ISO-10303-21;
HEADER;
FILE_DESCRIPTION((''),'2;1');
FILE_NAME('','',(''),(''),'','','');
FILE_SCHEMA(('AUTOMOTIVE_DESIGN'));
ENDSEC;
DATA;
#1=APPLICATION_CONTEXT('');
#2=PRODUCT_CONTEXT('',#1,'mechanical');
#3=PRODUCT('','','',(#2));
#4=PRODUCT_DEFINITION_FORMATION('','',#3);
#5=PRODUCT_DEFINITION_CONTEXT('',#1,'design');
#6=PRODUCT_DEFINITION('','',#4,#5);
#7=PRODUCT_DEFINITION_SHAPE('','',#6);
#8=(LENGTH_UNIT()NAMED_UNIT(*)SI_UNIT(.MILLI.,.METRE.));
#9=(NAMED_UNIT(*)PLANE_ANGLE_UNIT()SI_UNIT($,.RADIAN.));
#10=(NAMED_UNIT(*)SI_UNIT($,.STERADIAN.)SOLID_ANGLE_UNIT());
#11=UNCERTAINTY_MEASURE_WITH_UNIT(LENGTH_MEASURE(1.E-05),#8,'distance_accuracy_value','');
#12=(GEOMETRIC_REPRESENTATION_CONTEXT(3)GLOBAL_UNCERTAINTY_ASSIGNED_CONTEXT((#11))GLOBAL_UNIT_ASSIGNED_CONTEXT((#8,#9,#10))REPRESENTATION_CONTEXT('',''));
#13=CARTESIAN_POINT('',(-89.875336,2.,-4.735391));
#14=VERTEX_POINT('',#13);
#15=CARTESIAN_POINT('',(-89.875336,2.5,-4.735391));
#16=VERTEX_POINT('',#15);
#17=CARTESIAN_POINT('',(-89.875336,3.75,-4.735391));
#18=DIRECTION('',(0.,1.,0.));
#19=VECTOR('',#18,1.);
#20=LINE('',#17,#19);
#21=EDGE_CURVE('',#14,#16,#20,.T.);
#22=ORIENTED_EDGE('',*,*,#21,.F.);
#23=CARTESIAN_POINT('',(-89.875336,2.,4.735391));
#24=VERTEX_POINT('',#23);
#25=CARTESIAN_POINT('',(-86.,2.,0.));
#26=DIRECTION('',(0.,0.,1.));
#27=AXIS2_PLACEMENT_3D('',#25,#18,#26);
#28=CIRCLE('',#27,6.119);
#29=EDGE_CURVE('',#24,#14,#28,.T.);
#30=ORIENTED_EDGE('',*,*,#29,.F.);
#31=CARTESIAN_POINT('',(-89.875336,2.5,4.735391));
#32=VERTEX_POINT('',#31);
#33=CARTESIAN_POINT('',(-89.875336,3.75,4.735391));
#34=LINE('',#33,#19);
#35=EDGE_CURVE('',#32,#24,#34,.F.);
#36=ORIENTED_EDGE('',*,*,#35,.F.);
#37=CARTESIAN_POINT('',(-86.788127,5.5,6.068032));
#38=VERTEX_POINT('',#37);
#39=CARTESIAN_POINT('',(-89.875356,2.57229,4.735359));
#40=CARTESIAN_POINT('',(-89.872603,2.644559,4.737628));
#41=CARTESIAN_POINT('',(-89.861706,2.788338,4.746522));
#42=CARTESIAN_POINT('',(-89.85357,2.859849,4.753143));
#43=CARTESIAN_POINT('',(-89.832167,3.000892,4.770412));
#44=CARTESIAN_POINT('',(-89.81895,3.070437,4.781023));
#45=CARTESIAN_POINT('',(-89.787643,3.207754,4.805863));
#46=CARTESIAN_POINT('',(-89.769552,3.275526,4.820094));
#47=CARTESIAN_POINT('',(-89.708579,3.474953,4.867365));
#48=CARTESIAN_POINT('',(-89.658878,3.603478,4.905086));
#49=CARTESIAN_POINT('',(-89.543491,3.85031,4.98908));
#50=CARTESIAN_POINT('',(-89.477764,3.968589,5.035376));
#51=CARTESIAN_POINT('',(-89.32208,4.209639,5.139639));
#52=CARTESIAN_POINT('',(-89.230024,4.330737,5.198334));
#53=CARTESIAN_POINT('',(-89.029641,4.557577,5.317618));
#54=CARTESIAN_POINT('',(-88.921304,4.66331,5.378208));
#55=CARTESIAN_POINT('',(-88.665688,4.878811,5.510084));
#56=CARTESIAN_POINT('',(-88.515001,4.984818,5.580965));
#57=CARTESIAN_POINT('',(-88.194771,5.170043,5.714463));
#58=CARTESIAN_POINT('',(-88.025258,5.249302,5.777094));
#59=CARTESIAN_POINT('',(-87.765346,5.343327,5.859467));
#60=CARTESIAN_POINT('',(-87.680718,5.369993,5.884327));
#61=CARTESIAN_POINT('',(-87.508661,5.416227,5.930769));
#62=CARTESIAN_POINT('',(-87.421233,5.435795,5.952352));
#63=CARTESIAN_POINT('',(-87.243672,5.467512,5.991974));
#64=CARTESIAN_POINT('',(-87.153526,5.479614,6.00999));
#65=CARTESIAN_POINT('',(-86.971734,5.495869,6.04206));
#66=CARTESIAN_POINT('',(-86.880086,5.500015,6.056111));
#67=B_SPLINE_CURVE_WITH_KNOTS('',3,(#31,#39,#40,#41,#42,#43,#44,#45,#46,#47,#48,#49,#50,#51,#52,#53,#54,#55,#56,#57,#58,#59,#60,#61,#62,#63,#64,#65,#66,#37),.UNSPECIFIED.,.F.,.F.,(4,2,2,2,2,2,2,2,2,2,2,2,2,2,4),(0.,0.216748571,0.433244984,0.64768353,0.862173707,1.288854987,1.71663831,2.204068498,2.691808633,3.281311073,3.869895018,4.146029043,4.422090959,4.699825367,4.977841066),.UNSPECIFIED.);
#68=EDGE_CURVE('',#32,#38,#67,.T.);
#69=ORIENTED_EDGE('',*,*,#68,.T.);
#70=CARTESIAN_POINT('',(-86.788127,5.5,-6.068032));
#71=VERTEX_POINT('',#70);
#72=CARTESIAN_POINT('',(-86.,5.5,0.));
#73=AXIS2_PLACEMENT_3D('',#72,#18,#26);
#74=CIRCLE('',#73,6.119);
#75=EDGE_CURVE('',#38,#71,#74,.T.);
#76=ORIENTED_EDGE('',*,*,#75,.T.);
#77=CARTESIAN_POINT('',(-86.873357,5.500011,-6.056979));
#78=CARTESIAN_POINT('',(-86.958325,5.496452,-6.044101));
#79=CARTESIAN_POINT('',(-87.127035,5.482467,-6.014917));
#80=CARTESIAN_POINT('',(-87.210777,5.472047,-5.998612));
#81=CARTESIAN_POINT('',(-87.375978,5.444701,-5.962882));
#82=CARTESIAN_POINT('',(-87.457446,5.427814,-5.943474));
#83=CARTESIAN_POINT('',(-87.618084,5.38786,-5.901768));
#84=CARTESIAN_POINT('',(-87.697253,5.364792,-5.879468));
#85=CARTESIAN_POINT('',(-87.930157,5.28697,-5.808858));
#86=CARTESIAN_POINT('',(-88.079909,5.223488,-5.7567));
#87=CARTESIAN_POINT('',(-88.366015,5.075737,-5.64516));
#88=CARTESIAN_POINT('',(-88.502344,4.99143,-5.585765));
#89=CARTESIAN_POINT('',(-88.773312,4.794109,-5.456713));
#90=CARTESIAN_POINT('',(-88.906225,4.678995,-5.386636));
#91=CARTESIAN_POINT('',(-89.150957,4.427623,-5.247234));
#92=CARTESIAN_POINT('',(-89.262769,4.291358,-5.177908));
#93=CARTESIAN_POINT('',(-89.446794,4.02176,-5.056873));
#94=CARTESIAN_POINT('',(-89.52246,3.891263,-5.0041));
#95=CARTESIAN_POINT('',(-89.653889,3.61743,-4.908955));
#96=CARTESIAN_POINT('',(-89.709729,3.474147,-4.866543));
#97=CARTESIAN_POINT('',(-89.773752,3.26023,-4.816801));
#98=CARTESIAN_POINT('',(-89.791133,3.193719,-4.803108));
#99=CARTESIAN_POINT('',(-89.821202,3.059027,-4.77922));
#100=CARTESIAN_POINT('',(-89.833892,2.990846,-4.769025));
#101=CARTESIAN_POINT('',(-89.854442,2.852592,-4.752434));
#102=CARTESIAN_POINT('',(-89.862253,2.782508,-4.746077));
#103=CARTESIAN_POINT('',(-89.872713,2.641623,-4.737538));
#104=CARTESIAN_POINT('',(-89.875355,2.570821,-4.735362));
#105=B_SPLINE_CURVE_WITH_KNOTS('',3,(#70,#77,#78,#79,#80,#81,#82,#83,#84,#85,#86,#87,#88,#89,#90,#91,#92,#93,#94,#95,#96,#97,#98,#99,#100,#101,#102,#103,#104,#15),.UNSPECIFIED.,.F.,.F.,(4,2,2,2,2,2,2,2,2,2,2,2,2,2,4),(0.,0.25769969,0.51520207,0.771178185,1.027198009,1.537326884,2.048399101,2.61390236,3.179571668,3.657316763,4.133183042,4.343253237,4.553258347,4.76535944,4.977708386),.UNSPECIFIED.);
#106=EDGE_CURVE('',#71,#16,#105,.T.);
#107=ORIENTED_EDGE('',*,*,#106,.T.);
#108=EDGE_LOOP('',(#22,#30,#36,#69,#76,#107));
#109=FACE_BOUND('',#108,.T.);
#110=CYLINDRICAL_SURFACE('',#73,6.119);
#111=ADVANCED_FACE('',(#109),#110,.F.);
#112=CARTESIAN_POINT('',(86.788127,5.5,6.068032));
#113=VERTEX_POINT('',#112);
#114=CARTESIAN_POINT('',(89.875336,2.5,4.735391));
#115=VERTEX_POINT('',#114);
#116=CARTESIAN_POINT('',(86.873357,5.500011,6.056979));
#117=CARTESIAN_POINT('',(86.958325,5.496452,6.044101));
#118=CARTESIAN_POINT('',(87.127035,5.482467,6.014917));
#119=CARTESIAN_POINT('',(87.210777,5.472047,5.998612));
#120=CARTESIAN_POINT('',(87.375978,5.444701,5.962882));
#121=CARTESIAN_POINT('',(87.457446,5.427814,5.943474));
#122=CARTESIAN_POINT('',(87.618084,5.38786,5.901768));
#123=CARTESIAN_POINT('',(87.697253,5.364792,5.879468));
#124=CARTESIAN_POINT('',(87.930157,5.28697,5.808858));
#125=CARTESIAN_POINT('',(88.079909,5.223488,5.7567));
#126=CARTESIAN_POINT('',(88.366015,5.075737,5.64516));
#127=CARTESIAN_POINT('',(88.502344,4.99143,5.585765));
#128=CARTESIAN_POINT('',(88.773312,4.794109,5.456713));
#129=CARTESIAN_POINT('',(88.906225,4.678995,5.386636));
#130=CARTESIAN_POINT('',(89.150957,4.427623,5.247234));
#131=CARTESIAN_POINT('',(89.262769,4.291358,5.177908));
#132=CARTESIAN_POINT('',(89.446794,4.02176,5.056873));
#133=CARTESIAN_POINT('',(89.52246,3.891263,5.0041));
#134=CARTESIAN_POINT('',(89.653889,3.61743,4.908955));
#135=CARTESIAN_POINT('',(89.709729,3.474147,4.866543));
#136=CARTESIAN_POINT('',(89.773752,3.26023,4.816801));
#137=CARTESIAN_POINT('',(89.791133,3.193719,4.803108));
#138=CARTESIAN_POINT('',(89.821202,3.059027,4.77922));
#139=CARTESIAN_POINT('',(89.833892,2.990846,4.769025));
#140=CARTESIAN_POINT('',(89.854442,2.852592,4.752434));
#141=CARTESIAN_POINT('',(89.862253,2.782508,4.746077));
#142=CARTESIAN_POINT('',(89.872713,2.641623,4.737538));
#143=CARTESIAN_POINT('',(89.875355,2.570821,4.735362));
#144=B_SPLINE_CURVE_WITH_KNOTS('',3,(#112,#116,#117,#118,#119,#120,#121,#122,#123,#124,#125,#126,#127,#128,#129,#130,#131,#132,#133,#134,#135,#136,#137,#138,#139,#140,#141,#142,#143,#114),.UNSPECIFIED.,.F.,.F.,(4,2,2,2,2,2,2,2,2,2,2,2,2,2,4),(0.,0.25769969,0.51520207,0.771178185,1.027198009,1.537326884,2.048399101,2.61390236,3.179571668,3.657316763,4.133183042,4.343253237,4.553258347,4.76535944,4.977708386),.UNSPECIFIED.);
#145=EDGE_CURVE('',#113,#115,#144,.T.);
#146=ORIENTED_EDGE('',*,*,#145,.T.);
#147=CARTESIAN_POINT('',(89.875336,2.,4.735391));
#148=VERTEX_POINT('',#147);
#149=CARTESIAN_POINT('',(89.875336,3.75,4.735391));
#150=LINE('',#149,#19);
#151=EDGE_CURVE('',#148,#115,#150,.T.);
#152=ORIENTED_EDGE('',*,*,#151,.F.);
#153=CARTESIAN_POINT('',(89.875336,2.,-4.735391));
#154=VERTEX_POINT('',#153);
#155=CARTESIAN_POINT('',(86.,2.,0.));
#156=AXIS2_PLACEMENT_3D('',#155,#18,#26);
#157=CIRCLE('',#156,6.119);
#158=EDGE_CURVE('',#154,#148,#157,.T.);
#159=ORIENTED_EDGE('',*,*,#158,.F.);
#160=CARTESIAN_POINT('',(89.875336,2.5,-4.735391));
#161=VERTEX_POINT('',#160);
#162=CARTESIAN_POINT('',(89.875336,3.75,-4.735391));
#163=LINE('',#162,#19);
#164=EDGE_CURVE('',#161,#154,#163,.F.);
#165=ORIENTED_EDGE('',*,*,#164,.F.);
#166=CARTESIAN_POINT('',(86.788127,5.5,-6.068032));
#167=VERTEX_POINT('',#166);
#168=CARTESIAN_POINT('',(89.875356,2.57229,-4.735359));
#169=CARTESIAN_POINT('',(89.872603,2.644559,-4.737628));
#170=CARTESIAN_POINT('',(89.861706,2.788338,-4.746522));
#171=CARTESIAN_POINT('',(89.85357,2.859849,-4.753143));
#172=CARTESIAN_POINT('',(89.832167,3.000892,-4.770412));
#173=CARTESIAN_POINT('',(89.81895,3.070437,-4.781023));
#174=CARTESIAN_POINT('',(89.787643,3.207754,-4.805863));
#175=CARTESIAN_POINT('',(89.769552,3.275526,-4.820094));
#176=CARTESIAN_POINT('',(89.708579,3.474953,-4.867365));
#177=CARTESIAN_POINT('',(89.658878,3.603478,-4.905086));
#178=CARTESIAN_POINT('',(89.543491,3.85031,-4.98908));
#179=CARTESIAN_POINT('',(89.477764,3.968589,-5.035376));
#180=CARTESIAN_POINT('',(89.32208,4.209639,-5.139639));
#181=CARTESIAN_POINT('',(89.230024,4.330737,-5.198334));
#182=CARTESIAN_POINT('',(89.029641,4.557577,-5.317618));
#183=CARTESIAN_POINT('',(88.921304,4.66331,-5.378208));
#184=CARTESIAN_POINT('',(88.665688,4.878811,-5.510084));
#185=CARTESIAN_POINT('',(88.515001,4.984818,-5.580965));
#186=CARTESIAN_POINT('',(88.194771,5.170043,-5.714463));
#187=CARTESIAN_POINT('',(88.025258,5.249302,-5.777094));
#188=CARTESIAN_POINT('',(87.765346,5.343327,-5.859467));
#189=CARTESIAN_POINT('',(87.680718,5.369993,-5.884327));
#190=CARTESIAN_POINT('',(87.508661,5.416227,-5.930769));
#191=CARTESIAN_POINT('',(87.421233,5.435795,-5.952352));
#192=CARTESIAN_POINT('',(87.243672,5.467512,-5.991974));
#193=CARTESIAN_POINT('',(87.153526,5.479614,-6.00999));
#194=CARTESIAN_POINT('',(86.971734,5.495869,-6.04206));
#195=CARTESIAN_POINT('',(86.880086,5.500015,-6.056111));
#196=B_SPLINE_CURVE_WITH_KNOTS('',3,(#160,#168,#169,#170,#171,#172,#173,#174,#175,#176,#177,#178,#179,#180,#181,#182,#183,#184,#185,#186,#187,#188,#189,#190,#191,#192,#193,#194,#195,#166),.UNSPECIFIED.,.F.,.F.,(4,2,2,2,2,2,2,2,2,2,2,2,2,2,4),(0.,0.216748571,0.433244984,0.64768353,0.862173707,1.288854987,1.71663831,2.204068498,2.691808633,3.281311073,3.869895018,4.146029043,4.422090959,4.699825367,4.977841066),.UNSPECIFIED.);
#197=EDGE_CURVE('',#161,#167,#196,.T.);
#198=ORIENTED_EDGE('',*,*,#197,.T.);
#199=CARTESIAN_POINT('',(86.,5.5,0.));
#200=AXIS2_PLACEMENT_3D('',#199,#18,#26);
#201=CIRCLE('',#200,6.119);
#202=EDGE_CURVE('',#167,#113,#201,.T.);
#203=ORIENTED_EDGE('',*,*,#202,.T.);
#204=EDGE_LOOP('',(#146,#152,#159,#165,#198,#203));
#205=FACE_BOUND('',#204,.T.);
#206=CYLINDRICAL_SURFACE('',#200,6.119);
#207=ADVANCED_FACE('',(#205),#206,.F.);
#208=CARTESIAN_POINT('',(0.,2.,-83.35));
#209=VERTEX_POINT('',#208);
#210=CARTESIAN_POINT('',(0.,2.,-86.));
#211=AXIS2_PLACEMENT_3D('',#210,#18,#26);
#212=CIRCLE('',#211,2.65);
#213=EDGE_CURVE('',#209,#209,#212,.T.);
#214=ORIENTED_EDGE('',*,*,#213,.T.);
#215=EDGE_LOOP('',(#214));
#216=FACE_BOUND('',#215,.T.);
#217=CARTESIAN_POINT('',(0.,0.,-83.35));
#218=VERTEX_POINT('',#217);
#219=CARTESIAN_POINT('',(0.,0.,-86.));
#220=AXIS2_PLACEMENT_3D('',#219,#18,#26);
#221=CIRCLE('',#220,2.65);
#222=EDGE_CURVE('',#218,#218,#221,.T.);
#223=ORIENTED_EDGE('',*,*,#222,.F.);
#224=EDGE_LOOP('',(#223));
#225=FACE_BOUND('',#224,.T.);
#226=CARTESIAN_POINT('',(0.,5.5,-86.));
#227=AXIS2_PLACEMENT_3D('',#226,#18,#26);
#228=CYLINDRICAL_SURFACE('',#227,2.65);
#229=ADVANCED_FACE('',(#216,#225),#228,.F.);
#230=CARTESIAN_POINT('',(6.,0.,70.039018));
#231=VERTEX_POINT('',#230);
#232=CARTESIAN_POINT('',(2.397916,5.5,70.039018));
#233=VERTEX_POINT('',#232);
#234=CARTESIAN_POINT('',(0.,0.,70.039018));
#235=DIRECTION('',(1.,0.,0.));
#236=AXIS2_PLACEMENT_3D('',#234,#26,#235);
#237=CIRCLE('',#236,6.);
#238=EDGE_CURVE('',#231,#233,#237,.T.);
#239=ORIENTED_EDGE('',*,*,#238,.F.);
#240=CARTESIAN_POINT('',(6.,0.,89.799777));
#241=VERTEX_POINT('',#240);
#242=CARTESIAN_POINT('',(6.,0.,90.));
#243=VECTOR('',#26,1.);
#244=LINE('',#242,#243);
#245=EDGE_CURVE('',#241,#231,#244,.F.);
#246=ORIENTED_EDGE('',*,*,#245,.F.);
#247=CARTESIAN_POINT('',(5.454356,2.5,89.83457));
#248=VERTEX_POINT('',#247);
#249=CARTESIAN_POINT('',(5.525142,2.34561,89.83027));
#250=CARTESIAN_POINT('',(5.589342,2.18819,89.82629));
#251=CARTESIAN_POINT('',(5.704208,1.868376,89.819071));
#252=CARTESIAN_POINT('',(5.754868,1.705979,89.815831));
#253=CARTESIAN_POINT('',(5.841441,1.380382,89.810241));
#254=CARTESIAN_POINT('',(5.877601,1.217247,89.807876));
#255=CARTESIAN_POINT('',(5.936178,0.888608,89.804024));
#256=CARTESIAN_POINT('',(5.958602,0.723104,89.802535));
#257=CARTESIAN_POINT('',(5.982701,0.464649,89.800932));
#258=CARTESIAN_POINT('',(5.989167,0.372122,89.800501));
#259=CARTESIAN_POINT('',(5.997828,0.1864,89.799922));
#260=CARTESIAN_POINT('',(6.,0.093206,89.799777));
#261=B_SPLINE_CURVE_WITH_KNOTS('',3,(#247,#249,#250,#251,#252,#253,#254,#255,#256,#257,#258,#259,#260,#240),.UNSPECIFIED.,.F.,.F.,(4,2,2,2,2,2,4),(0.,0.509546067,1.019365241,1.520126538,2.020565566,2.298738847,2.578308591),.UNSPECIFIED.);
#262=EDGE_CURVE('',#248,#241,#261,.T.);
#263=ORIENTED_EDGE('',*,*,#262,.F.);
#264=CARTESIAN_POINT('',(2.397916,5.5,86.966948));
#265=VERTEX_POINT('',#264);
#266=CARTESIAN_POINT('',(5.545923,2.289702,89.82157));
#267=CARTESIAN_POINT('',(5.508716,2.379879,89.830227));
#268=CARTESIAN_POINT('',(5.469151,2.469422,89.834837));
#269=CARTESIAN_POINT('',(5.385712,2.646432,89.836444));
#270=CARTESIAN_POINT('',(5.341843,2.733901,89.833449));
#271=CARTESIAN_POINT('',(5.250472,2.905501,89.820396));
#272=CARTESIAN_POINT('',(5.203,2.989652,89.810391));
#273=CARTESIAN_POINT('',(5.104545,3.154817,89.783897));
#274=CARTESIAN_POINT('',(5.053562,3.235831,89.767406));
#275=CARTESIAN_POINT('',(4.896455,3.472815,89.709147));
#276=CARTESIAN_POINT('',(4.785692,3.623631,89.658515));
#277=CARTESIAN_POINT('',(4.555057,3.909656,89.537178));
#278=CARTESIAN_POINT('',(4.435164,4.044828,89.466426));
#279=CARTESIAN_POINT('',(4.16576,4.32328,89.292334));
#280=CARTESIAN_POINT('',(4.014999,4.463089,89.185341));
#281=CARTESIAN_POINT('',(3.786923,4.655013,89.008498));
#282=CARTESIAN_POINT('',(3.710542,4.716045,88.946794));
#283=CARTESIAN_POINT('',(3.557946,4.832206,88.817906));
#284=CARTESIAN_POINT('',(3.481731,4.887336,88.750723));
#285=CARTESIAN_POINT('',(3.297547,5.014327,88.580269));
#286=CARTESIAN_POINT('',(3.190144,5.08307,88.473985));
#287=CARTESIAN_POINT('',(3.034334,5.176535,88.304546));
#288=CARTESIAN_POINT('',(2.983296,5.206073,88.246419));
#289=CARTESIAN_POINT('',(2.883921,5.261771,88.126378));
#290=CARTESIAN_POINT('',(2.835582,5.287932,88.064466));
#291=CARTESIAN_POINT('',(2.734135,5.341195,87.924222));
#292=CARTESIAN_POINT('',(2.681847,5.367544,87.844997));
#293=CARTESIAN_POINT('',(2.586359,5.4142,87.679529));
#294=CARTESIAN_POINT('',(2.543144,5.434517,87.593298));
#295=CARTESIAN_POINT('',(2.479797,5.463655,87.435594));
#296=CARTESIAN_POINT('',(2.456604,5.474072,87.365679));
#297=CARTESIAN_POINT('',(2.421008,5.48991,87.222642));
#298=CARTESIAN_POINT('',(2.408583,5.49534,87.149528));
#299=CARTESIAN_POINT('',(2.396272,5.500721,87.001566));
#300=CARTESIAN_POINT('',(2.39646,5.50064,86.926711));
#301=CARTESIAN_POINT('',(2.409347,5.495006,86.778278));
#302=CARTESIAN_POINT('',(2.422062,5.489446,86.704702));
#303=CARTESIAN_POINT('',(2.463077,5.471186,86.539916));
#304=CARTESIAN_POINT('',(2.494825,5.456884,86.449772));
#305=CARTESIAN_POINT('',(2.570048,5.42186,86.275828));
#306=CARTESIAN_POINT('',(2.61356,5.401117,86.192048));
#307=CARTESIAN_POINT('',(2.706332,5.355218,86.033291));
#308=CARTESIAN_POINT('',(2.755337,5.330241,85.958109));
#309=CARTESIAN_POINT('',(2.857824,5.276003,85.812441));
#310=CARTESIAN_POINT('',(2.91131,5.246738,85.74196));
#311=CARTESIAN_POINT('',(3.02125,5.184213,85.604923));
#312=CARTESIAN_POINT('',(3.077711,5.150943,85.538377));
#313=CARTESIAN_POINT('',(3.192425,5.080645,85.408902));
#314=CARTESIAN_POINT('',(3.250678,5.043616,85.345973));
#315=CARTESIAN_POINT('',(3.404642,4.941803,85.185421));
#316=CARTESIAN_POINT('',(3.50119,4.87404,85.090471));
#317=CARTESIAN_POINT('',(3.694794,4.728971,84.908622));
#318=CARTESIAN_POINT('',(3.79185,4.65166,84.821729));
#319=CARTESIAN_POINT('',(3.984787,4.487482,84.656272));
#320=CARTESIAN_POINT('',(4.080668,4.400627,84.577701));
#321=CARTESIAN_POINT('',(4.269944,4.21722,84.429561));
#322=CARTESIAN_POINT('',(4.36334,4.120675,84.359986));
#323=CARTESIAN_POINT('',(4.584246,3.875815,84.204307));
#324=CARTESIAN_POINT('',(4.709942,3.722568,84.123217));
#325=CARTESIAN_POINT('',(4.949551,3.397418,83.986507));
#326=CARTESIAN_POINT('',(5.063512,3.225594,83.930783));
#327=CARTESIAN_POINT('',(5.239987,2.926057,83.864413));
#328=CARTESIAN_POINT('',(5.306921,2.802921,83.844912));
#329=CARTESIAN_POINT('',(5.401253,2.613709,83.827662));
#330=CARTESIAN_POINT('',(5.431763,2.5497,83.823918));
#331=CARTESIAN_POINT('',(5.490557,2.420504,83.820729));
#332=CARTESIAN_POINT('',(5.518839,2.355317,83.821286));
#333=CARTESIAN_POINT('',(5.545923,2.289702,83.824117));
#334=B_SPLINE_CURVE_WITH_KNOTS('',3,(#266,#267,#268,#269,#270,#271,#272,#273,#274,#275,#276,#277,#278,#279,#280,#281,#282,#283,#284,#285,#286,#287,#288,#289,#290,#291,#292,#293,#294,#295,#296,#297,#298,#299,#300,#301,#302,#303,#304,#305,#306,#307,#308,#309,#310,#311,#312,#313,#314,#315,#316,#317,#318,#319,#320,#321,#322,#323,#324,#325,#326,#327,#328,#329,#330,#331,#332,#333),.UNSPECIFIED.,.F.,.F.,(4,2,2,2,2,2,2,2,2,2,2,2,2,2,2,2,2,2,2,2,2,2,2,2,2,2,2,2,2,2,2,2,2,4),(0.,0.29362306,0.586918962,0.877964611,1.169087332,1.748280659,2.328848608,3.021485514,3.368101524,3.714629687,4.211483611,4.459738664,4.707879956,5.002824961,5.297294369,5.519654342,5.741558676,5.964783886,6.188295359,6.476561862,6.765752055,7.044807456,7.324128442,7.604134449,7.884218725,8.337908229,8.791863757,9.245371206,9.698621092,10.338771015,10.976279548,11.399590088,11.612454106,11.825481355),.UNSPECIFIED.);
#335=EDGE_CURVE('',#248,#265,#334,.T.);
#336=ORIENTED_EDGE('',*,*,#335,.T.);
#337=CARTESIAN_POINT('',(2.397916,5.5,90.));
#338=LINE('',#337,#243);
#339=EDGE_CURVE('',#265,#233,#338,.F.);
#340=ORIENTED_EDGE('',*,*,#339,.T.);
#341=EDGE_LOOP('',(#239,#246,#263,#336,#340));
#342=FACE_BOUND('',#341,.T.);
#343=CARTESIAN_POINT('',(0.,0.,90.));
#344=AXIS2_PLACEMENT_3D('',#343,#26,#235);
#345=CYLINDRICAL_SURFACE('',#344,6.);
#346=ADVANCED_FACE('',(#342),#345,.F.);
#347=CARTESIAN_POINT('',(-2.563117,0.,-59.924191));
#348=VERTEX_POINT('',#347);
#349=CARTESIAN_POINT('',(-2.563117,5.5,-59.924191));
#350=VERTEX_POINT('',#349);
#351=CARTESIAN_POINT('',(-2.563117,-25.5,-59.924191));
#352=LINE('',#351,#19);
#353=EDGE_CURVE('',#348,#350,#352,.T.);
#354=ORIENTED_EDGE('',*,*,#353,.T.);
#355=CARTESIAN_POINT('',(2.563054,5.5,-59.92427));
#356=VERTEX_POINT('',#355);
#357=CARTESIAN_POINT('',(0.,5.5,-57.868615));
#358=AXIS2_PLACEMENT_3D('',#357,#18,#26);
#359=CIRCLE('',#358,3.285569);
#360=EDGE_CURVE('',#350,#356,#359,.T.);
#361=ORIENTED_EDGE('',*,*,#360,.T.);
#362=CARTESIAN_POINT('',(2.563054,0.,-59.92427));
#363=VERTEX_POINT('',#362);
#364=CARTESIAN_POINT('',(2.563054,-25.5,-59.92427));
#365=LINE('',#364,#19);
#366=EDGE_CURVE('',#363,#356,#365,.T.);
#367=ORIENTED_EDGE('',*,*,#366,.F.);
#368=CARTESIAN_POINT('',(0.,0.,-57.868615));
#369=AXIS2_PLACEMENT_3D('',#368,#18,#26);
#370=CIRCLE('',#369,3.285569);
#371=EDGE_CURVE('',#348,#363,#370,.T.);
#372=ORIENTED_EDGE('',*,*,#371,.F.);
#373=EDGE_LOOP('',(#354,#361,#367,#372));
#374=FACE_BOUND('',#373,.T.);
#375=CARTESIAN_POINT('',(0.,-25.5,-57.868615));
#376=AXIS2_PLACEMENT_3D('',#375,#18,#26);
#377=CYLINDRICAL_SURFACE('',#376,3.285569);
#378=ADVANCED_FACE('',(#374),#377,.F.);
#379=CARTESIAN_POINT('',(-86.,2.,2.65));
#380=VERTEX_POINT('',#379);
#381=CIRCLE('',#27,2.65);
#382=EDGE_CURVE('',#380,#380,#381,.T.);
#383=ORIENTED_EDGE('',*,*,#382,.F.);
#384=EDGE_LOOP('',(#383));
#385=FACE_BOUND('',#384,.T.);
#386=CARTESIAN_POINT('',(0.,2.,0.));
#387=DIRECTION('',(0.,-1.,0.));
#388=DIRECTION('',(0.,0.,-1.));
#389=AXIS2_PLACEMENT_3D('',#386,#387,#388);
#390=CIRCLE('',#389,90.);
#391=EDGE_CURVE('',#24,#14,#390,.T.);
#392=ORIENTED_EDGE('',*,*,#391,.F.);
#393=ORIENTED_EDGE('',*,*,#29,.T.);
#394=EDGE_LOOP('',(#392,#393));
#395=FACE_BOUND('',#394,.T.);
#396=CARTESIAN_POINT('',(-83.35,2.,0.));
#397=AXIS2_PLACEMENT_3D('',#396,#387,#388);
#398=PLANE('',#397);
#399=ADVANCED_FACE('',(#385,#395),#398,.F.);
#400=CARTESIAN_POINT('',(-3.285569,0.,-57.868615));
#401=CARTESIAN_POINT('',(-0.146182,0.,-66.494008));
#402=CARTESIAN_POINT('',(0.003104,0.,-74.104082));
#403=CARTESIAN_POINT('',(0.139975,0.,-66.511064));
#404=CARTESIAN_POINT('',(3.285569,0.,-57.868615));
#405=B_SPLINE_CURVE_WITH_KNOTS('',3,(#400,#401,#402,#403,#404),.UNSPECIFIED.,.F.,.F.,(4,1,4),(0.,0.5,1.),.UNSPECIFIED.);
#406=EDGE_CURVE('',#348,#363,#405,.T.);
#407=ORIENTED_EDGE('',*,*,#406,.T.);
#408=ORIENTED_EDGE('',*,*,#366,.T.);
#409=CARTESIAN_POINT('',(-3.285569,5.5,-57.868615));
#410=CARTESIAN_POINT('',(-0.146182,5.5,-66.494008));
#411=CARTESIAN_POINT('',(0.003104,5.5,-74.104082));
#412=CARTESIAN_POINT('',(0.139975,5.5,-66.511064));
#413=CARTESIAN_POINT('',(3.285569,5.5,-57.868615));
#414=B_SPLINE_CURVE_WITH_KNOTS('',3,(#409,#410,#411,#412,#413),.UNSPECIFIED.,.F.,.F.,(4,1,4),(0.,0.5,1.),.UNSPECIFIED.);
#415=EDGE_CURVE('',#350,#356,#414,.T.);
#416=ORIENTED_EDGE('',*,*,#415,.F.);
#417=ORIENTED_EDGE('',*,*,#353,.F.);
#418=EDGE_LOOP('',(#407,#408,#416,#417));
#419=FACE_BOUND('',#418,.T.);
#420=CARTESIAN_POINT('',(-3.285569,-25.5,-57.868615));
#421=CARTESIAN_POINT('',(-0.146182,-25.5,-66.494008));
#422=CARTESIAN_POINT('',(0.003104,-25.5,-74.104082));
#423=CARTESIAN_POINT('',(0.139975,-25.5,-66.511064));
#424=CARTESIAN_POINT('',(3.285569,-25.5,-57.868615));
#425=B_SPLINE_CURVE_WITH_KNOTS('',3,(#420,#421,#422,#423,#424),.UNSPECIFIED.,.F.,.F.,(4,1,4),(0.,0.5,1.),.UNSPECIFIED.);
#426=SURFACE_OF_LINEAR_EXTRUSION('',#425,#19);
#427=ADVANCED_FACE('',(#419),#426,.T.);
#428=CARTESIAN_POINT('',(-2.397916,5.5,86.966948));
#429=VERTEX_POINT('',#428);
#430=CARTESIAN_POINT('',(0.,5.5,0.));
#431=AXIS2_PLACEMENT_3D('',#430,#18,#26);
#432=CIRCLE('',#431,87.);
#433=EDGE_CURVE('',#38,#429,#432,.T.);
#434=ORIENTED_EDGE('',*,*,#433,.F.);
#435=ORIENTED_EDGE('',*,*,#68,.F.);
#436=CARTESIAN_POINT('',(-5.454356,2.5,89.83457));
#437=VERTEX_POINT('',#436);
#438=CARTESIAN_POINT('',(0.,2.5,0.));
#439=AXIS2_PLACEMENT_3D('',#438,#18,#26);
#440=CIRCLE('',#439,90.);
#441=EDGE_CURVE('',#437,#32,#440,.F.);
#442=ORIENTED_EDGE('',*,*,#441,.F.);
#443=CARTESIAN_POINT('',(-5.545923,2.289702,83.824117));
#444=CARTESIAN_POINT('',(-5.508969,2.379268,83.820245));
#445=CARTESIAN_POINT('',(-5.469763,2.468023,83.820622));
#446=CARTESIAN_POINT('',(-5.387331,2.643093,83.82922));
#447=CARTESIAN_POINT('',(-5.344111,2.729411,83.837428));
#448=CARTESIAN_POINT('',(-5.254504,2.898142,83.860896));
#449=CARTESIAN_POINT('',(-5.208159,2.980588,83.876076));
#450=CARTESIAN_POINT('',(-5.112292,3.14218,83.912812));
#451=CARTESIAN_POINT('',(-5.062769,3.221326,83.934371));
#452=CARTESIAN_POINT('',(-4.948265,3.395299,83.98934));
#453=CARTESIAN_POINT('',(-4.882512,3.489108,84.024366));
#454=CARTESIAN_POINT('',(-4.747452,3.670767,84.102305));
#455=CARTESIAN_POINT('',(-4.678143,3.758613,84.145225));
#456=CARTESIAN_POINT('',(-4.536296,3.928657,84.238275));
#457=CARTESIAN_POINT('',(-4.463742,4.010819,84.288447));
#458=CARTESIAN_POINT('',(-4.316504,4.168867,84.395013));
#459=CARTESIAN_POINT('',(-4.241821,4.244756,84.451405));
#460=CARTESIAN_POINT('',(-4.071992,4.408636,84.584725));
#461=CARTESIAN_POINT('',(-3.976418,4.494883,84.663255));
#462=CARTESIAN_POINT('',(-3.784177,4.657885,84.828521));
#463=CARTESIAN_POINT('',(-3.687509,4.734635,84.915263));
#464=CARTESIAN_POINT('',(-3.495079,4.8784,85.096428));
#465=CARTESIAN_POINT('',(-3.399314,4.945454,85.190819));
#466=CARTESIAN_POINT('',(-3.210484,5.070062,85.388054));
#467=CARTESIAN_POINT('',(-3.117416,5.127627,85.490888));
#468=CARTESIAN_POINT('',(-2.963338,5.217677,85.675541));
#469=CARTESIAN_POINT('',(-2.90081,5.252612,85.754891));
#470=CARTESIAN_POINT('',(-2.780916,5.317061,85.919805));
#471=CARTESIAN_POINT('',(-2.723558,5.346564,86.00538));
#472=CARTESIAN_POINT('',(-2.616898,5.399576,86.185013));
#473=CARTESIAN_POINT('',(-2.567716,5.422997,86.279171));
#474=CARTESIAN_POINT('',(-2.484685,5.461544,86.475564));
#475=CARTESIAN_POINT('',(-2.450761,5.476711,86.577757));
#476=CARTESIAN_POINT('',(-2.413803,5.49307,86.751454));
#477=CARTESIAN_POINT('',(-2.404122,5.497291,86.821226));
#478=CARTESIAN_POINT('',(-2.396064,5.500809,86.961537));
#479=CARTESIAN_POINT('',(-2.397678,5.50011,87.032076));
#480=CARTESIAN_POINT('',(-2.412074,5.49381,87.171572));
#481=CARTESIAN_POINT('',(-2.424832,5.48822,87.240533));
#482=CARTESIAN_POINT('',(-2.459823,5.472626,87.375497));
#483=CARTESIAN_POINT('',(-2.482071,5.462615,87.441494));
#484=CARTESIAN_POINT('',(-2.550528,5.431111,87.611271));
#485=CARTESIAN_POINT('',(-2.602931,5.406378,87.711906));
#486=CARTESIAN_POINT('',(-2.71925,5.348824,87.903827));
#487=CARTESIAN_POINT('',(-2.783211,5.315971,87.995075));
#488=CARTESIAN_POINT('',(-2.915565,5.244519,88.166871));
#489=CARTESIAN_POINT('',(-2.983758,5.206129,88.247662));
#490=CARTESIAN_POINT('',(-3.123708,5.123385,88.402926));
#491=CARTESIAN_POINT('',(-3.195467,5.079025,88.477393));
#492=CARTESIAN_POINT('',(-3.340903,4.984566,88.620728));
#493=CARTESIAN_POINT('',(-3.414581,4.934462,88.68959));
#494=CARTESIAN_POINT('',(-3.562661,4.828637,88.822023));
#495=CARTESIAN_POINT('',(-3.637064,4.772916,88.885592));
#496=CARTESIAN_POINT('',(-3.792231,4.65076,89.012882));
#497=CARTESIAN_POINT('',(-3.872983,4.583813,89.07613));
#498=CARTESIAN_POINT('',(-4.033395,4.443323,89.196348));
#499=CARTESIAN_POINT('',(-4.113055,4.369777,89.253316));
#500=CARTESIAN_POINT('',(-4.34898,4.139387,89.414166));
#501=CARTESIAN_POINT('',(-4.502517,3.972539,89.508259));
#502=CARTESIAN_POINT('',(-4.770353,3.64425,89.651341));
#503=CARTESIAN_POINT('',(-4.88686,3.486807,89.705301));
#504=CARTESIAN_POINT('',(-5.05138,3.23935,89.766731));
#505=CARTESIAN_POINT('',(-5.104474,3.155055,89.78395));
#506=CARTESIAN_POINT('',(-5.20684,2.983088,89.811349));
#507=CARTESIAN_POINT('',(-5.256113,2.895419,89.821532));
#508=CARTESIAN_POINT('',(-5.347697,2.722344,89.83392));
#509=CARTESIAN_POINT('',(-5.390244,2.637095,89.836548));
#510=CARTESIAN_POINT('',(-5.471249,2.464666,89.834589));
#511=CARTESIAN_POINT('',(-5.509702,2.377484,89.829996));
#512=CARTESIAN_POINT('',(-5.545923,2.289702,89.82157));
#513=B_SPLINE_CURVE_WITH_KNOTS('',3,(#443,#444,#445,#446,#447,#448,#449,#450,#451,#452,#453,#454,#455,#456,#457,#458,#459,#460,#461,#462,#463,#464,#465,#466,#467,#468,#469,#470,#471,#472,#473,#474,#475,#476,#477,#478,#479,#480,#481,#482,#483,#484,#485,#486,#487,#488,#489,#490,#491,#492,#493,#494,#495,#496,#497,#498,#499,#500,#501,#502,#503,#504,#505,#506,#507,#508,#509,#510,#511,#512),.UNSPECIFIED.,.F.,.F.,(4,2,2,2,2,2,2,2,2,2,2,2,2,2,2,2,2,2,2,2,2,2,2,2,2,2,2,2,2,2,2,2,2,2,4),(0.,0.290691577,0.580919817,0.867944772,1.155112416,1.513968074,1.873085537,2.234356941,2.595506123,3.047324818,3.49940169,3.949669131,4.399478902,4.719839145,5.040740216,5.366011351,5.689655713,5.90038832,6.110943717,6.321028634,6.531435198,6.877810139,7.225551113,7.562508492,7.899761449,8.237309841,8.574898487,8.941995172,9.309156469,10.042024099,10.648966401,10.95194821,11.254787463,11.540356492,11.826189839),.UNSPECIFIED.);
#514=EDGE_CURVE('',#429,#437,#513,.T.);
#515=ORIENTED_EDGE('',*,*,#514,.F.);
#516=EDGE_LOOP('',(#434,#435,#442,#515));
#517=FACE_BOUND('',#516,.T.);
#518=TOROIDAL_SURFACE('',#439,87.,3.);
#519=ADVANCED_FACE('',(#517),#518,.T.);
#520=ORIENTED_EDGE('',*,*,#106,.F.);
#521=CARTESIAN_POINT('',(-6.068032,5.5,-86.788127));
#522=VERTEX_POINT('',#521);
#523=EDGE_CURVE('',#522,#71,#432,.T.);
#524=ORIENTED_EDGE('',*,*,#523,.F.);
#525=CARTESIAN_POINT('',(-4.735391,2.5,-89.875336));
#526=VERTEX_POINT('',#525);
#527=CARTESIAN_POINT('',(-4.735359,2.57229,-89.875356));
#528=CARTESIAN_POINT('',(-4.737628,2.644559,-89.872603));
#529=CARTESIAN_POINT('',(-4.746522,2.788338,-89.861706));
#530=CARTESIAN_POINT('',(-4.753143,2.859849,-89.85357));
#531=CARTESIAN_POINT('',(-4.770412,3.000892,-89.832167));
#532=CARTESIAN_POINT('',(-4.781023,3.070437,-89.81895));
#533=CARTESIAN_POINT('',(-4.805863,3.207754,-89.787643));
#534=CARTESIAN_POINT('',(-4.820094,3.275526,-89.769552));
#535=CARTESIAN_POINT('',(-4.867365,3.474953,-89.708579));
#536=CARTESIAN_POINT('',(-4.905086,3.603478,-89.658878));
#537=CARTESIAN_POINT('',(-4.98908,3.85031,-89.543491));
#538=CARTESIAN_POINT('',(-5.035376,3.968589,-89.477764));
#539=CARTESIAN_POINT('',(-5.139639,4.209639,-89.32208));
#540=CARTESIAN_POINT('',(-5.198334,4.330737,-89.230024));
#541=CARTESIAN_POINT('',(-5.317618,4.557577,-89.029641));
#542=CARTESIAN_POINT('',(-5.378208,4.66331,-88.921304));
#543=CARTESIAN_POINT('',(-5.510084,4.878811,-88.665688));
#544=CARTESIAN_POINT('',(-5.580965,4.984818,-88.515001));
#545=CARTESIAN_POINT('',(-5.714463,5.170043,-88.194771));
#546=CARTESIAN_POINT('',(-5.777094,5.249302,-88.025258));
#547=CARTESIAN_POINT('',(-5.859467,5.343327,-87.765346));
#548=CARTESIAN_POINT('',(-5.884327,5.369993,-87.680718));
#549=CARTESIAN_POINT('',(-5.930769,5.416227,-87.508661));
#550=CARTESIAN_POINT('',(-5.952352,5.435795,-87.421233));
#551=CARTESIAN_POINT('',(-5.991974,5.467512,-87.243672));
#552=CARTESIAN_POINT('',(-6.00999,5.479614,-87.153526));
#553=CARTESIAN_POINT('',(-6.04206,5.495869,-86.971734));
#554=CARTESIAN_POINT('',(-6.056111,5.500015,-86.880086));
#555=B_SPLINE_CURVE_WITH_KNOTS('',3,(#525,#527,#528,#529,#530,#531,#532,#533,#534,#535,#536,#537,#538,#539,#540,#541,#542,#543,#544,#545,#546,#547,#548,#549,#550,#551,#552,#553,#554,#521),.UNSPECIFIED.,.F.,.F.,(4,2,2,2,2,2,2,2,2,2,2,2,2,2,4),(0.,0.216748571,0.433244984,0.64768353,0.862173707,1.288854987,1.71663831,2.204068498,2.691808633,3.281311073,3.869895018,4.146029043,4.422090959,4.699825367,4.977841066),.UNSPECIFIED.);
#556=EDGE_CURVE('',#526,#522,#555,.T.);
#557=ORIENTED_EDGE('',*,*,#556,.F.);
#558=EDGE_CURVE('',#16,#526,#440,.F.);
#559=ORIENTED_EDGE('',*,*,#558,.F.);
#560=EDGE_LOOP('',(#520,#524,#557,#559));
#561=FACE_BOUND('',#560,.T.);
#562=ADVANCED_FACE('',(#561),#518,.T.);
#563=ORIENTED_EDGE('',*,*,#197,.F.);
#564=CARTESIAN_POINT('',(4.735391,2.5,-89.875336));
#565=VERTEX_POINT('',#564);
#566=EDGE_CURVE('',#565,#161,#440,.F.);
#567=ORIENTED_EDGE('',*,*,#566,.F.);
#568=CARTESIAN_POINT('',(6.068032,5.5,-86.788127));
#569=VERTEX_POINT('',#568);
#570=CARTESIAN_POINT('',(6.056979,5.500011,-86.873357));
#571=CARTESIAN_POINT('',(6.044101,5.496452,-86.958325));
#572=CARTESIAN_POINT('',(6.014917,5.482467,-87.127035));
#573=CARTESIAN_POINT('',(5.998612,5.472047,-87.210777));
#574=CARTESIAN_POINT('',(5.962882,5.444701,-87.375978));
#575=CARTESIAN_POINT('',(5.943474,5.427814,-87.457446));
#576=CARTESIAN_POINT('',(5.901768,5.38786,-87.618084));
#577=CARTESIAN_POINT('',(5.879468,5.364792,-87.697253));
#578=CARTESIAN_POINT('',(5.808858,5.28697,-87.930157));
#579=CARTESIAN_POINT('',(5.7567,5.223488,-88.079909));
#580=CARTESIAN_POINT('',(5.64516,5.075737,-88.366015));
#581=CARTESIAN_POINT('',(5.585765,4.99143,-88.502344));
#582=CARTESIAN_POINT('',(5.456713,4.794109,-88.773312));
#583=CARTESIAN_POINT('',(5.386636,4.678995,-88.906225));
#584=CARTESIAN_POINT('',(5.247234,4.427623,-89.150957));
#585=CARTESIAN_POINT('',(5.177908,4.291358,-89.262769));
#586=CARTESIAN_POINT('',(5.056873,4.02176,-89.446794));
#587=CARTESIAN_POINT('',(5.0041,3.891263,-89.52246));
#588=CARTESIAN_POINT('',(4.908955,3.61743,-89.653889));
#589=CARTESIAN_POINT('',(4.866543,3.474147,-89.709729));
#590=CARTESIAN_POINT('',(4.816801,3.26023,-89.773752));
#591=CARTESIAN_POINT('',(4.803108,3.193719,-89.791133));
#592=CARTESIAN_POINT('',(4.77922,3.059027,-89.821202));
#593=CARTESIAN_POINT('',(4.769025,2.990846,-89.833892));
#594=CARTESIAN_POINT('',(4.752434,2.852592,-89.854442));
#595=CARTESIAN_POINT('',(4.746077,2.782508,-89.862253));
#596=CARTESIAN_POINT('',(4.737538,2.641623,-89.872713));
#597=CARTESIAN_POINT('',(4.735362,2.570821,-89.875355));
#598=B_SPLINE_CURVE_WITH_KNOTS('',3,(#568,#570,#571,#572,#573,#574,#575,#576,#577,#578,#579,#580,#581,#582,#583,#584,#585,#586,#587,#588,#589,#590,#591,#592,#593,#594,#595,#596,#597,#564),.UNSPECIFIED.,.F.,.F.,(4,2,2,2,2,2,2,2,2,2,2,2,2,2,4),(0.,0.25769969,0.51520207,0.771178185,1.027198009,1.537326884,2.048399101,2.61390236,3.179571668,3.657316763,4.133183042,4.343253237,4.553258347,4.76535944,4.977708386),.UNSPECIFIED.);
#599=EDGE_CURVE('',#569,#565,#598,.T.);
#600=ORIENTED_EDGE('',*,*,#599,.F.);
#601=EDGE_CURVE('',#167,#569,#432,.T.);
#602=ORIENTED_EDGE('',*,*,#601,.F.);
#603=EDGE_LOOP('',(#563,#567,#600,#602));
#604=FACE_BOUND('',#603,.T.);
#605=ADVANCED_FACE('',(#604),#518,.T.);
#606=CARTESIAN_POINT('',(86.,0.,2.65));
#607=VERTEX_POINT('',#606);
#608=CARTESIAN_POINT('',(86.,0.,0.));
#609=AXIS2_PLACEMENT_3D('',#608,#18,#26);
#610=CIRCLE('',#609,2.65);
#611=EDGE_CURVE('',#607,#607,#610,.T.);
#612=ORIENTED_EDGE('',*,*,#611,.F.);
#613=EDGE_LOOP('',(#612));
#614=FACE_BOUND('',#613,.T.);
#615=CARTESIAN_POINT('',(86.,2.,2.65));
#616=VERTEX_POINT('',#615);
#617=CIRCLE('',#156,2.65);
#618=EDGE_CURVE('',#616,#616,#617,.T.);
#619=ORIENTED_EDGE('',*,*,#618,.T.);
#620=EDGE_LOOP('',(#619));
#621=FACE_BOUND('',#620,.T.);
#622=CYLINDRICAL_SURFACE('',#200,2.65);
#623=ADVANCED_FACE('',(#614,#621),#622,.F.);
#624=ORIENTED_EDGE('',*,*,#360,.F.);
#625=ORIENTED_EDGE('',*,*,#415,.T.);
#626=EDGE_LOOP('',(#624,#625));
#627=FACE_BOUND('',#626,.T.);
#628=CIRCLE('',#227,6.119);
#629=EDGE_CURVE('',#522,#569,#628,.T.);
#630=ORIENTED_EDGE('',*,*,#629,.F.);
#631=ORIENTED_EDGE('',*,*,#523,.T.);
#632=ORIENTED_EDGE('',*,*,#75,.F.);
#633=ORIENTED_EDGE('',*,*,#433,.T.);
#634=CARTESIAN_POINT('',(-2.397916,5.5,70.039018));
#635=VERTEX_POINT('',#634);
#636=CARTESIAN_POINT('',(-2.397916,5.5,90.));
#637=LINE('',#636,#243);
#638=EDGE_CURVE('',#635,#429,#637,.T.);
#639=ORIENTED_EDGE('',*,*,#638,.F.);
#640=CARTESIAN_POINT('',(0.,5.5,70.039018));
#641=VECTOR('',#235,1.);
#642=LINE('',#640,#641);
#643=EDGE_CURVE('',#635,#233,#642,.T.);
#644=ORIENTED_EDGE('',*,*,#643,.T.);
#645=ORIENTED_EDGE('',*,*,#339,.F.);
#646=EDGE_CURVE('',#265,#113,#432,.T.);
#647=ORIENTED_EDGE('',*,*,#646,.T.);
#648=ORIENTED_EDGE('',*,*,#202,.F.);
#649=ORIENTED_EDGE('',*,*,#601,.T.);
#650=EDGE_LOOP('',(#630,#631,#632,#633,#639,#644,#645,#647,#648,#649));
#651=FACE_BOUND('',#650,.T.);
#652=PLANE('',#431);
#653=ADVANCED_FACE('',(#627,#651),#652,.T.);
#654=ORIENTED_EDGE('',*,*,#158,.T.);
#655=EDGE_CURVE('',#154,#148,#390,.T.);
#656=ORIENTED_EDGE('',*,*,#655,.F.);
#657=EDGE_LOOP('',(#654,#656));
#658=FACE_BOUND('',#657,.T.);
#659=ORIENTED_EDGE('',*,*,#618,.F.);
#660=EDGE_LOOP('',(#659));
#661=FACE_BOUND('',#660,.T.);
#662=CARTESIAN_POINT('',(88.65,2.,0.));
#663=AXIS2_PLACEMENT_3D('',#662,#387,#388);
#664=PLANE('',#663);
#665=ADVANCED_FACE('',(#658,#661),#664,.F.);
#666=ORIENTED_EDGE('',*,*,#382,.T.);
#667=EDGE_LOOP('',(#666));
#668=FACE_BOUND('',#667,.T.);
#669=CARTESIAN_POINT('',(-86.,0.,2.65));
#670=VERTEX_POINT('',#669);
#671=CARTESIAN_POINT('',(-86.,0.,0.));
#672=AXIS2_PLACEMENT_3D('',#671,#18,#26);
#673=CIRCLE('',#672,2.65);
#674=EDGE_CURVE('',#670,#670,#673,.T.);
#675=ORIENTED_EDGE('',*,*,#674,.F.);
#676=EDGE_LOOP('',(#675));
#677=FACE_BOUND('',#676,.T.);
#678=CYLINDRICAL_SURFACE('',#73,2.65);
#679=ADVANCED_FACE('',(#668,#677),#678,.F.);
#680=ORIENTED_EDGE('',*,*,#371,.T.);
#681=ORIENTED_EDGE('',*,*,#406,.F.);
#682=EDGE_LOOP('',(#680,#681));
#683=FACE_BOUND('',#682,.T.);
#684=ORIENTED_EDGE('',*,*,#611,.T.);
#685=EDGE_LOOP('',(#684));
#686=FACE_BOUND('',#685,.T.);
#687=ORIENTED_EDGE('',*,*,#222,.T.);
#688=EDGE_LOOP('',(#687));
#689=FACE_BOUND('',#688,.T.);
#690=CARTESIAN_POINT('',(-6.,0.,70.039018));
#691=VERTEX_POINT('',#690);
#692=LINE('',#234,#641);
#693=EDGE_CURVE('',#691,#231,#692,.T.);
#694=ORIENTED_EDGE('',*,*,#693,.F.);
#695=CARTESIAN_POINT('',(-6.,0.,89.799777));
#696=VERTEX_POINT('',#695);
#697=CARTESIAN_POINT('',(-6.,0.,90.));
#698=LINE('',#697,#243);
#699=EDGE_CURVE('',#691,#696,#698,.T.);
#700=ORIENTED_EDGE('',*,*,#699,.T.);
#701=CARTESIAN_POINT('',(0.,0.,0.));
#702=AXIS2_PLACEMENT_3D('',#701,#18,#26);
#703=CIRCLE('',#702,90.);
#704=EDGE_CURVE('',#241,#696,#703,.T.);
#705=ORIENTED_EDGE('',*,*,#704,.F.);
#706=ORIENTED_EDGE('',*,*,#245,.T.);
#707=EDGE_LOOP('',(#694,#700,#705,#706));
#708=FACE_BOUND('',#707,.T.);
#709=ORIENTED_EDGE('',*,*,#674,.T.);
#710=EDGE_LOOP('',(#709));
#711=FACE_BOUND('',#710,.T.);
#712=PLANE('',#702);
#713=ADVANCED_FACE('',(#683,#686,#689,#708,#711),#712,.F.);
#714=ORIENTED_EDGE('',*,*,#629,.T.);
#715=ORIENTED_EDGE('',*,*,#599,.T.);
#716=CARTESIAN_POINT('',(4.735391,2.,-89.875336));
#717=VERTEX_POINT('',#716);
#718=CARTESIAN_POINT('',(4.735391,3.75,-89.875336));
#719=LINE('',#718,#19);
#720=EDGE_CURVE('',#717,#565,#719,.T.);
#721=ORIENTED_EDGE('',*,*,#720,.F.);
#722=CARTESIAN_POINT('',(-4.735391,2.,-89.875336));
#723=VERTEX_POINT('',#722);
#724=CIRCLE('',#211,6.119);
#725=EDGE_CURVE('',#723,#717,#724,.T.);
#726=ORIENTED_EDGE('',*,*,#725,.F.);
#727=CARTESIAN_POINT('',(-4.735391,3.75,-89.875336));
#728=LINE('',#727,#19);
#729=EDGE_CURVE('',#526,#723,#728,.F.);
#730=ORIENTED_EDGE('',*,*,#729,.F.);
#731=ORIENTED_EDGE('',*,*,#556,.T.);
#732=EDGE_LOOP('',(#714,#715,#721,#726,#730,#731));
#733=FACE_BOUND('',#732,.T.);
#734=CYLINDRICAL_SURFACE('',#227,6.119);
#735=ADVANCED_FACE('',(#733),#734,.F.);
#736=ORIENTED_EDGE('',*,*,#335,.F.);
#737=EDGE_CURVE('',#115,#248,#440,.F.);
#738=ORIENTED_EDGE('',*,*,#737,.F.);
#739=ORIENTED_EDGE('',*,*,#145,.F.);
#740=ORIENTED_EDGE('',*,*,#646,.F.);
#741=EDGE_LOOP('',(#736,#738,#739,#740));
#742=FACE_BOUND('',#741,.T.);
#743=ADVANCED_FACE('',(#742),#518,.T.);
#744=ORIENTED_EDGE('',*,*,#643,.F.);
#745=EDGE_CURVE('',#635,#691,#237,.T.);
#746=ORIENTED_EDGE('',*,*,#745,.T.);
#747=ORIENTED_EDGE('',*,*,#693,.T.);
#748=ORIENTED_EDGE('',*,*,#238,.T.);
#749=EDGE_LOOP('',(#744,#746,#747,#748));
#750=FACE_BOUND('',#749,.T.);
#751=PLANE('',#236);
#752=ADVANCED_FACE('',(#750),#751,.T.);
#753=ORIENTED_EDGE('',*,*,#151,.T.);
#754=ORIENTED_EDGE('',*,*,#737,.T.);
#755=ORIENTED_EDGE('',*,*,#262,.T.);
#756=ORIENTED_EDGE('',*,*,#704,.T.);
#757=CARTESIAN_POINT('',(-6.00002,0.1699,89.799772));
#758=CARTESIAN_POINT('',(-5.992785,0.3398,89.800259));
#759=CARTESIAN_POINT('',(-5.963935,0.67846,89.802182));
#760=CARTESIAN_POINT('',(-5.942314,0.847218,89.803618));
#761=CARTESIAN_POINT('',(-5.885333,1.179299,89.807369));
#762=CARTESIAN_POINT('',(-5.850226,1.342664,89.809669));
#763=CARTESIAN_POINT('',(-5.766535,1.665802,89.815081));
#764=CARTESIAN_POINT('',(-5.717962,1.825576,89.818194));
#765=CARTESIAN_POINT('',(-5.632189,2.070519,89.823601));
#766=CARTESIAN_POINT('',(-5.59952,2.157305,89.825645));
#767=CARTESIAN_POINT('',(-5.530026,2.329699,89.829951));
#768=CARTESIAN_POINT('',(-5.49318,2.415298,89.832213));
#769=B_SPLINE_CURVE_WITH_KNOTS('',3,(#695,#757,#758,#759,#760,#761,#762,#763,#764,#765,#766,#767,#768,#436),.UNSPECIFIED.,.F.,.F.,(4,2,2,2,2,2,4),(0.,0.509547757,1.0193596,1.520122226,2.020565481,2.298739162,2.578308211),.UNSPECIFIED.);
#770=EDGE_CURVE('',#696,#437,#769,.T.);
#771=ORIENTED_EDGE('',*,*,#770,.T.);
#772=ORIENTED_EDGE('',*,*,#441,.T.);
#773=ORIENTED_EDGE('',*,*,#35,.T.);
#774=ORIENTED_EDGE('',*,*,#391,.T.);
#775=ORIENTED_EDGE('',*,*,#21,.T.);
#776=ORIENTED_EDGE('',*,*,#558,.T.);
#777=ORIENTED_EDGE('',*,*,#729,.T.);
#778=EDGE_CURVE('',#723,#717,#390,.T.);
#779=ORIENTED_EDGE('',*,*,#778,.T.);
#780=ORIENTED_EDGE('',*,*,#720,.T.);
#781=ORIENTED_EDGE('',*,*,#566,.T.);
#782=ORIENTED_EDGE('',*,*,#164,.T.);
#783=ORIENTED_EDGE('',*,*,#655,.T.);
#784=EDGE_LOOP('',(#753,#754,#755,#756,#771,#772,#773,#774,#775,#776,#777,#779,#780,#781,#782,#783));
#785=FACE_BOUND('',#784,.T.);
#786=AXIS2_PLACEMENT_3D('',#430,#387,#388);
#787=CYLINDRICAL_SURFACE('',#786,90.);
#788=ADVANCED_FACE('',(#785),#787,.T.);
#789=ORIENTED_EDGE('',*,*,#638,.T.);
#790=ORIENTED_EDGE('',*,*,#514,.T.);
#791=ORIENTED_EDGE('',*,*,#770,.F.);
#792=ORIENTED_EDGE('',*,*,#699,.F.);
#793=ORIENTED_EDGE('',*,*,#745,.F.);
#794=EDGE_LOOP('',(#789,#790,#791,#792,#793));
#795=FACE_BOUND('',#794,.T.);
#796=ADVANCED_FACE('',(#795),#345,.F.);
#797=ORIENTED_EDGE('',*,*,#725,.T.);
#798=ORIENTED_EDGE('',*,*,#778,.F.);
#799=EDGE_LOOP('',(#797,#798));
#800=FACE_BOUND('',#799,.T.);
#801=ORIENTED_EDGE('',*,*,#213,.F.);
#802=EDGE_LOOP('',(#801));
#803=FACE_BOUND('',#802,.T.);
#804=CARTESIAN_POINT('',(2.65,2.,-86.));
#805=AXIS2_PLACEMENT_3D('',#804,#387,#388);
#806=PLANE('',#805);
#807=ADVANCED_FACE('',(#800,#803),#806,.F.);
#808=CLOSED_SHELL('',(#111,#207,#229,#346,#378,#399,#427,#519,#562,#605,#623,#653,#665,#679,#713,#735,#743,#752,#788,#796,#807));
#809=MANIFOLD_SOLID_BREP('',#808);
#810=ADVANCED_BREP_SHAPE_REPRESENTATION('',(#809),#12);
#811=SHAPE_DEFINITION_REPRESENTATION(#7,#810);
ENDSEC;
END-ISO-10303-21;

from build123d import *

# Parameters (mm, degrees)
SKETCH1_R                                    = 90
BOSS_EXTRUDE1_DEPTH                          = 5.5
CBORE_FOR_M5_HEX_HEAD_CAP_SCREW1_D           = 5.3
CBORE_FOR_M5_HEX_HEAD_CAP_SCREW1_DEPTH       = 6
CBORE_FOR_M5_HEX_HEAD_CAP_SCREW1_CBORE_D     = 12.238
CBORE_FOR_M5_HEX_HEAD_CAP_SCREW1_CBORE_DEPTH = 3.5
CBORE_FOR_M5_HEX_HEAD_CAP_SCREW1_TIP         = 1.59228064
FILLET1_R                                    = 3
CUT_EXTRUDE1_DEPTH                           = 31
CUT_REVOLVE_THIN8_START                      = 70.039018211
CUT_REVOLVE_THIN8_DEPTH                      = 19.960981889


# Read off the part's stored shape, not the designer's step: Cut-Revolve-Thin8
with BuildPart() as part:
    # Sketch1 → Boss-Extrude1 (new body)
    with BuildSketch(Plane(origin=(0, 0, 0), x_dir=(1, 0, 0), z_dir=(0, 1, 0))):
        with Locations(Location((0, 0, 0), (0, 0, 270))):
            Circle(SKETCH1_R)
    extrude(amount=BOSS_EXTRUDE1_DEPTH)

    # CBORE for M5 Hex Head Cap Screw1
    with Locations(Plane(origin=(0, 5.5, 0), x_dir=(1, 0, 0), z_dir=(0, 1, 0))):
        with Locations((0, 86), (-86, 0), (86, 0)):
            CounterBoreHole(CBORE_FOR_M5_HEX_HEAD_CAP_SCREW1_D / 2, CBORE_FOR_M5_HEX_HEAD_CAP_SCREW1_CBORE_D / 2, CBORE_FOR_M5_HEX_HEAD_CAP_SCREW1_CBORE_DEPTH, depth=CBORE_FOR_M5_HEX_HEAD_CAP_SCREW1_DEPTH)
            with Locations((0, 0, -(CBORE_FOR_M5_HEX_HEAD_CAP_SCREW1_DEPTH + CBORE_FOR_M5_HEX_HEAD_CAP_SCREW1_TIP / 2))):  # 118° drill point
                Cone(0, CBORE_FOR_M5_HEX_HEAD_CAP_SCREW1_D / 2, CBORE_FOR_M5_HEX_HEAD_CAP_SCREW1_TIP, mode=Mode.SUBTRACT)

    # Fillet1
    fillet1_edges = [part.edges().sort_by_distance(p)[0] for p in [
        (-61.942775174, 5.5, 65.292362523),
        (-63.639610307, 5.5, -63.639610307),
        (63.639610307, 5.5, -63.639610307),
    ]]
    fillet(fillet1_edges, radius=FILLET1_R)

    # Sketch5 → Cut-Extrude1 (cut)
    with BuildSketch(Plane(origin=(0, 5.5, 0), x_dir=(1, 0, 0), z_dir=(0, 1, 0))):
        with BuildLine():
            add(Edge.make_bspline(
                [(-3.285569008, 57.868614525), (-3.024078757, 58.587053083), (-2.783851066, 59.272048996), (-2.563116696, 59.924191453)],
                knots=[0, 0, 0, 0, 0.04164671, 0.04164671, 0.04164671, 0.04164671], degree=3))
            ThreePointArc((-3.285569008, 57.868614525), (0, 54.583045517), (3.285569008, 57.868614525))
            add(Edge.make_bspline(
                [(2.563054058, 59.924269555), (2.783803493, 59.272145294), (3.0240518, 58.587127147), (3.285569008, 57.868614525)],
                knots=[0.958431192, 0.958431192, 0.958431192, 0.958431192, 1, 1, 1, 1], degree=3))
            ThreePointArc((2.563054058, 59.924269555), (-5.0059e-05, 61.154183532), (-2.563116696, 59.924191453))
        make_face()
        with BuildLine():
            ThreePointArc((-2.563116696, 59.924191453), (-3.099698411, 58.958033389), (-3.285569008, 57.868614525))
            add(Edge.make_bspline(
                [(-3.285569008, 57.868614525), (-3.024078757, 58.587053083), (-2.783851066, 59.272048996), (-2.563116696, 59.924191453)],
                knots=[0, 0, 0, 0, 0.04164671, 0.04164671, 0.04164671, 0.04164671], degree=3))
        make_face()
        with BuildLine():
            add(Edge.make_bspline(
                [(2.563054058, 59.924269555), (2.783803493, 59.272145294), (3.0240518, 58.587127147), (3.285569008, 57.868614525)],
                knots=[0.958431192, 0.958431192, 0.958431192, 0.958431192, 1, 1, 1, 1], degree=3))
            ThreePointArc((3.285569008, 57.868614525), (3.099681813, 58.958080616), (2.563054058, 59.924269555))
        make_face()
        with BuildLine():
            add(Edge.make_bspline(
                [(-2.563116696, 59.924191453), (-0.133769336, 67.101508499), (0.002619877, 73.497835408), (0.128574166, 67.116058723), (2.563054058, 59.924269555)],
                knots=[0.04164671, 0.04164671, 0.04164671, 0.04164671, 0.5, 0.958431192, 0.958431192, 0.958431192, 0.958431192], degree=3))
            ThreePointArc((-2.563116696, 59.924191453), (-5.0059e-05, 61.154183532), (2.563054058, 59.924269555))
        make_face()
    extrude(amount=-CUT_EXTRUDE1_DEPTH, mode=Mode.SUBTRACT)

    # Cut-Revolve-Thin8 outline → Cut-Revolve-Thin8 (cut)
    with BuildSketch(Plane.XY.offset(CUT_REVOLVE_THIN8_START)):
        with BuildLine():
            Line((-6, 0), (6, 0))
            ThreePointArc((6, 0), (5.019337335, 3.287286528), (2.397915762, 5.5))
            Line((2.397915762, 5.5), (-2.397915762, 5.5))
            ThreePointArc((-2.397915762, 5.5), (-5.019337335, 3.287286528), (-6, 0))
        make_face()
    extrude(amount=CUT_REVOLVE_THIN8_DEPTH, mode=Mode.SUBTRACT)


solid = part.part
